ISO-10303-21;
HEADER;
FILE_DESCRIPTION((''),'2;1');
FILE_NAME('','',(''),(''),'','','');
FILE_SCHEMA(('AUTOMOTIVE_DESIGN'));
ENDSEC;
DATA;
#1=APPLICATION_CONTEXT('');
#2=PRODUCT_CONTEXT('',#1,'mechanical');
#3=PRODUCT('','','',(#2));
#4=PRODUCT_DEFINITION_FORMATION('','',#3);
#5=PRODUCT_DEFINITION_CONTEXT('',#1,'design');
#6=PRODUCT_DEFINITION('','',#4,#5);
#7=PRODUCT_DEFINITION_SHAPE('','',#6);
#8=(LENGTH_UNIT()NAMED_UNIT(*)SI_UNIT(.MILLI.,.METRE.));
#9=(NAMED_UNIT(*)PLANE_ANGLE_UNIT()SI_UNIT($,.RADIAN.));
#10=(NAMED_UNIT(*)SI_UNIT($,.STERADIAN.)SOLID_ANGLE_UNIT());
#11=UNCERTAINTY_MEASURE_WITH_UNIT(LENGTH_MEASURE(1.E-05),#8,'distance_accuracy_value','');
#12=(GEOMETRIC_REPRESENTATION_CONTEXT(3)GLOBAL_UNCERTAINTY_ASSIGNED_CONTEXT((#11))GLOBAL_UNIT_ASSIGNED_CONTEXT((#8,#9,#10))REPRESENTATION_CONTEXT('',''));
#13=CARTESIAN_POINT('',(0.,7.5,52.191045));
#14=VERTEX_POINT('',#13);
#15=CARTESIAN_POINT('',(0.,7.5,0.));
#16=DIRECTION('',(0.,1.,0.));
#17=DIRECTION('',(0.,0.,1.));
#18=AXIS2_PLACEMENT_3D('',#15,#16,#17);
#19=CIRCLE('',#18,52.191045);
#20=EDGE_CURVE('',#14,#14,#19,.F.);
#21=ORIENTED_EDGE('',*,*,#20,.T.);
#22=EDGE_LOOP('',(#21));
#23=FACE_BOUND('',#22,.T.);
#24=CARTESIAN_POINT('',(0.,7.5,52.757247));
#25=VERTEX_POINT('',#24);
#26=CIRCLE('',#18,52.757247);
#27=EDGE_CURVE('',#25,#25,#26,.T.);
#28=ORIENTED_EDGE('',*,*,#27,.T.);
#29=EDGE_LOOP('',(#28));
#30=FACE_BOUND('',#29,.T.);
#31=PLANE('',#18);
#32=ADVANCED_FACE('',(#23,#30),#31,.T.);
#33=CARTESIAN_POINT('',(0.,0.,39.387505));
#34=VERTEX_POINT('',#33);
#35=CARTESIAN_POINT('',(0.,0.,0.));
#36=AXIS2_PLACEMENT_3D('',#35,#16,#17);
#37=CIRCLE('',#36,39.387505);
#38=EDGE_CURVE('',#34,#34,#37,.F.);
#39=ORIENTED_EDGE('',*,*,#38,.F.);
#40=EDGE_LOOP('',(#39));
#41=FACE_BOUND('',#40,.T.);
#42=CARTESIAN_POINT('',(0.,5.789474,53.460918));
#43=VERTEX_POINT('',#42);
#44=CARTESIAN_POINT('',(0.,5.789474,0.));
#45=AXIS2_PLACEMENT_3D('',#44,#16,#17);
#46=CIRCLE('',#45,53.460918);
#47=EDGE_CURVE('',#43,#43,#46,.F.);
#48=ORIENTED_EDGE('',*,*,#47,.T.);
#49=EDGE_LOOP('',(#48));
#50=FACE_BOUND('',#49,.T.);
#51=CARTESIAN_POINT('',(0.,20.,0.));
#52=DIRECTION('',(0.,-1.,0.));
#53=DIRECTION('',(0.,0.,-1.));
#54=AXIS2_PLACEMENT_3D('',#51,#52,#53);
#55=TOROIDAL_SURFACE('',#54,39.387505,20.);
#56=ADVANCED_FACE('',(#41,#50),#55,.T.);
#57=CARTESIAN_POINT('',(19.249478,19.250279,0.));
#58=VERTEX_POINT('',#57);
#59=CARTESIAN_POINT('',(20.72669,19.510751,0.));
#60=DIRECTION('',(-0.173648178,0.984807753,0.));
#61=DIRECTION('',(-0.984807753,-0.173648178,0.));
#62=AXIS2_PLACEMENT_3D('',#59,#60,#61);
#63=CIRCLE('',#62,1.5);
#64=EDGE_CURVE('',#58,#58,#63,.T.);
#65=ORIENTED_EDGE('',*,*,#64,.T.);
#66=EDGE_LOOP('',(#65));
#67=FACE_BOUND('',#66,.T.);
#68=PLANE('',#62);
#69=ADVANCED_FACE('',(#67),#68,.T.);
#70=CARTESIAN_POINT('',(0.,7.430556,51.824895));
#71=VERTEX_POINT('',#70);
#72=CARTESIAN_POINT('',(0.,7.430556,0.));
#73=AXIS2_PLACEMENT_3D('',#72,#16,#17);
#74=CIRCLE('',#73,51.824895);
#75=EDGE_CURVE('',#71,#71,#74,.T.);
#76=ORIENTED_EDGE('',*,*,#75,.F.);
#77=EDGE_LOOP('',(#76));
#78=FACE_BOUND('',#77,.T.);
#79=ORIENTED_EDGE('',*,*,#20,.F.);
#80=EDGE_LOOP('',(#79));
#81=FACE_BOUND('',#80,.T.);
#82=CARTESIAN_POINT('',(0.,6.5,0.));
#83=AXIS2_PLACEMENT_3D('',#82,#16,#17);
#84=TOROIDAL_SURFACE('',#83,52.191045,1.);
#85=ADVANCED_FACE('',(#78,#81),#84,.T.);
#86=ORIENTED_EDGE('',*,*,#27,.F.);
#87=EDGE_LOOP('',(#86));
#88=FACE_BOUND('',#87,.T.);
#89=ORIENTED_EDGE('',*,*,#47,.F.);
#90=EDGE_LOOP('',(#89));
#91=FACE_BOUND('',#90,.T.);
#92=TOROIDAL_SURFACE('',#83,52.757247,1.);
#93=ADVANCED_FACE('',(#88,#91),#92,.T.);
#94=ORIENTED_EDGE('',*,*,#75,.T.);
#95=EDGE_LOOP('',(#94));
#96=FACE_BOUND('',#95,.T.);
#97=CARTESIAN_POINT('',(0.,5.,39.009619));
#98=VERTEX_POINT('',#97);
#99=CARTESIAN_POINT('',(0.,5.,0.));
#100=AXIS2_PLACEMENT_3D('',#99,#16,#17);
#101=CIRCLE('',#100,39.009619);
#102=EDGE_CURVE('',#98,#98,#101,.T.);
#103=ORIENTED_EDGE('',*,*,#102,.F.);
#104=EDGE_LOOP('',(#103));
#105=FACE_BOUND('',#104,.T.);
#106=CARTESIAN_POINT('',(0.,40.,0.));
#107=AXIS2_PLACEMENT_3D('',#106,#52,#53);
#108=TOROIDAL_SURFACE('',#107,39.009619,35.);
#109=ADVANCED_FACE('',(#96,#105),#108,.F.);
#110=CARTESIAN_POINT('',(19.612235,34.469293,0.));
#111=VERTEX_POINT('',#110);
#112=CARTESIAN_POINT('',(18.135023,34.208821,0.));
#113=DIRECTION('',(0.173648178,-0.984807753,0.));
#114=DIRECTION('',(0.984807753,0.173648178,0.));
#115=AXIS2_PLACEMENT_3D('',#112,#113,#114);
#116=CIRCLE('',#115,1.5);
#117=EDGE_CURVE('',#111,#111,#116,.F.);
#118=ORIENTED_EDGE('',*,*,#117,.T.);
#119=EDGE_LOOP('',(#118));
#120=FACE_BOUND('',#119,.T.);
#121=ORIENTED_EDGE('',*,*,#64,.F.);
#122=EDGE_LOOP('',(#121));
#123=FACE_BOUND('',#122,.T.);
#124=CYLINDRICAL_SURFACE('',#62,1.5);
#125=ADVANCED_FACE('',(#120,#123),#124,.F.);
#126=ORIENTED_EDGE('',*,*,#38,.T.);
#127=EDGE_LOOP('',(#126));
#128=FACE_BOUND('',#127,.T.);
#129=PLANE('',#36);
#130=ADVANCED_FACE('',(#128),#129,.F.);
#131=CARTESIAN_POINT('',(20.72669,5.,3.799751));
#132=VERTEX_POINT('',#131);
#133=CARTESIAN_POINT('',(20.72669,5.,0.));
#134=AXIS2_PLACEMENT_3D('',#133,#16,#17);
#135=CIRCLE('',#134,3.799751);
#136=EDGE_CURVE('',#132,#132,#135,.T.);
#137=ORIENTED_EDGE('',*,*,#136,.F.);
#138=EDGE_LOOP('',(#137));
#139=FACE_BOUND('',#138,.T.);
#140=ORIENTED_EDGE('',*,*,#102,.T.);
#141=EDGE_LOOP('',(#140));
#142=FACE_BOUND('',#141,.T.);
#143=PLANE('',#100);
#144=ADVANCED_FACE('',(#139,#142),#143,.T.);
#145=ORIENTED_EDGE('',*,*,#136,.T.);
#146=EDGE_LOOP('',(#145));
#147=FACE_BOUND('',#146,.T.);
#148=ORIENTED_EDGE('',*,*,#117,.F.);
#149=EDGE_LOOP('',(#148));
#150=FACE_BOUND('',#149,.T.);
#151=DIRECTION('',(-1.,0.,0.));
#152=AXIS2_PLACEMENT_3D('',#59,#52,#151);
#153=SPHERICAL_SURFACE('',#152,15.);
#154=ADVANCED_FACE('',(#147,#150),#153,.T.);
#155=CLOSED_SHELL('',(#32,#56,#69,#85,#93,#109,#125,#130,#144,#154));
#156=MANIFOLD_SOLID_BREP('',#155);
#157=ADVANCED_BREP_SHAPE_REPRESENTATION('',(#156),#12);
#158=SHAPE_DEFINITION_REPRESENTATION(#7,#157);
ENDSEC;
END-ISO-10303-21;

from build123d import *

# Parameters (mm, degrees)
SKETCH1_R           = 55
BOSS_EXTRUDE1_DEPTH = 7.5
SKETCH2_R           = 52
CUT_EXTRUDE1_DEPTH  = 2.5
FILLET1_R           = 35
FILLET3_R           = 20
FILLET4_R           = 1
SKETCH5_R           = 1.5
CUT_EXTRUDE2_DEPTH  = 15


with BuildPart() as part:
    # Sketch1 → Boss-Extrude1 (new body)
    with BuildSketch(Plane(origin=(0, 0, 0), x_dir=(1, 0, 0), z_dir=(0, 1, 0))):
        with Locations(Location((0, 0, 0), (0, 0, 270))):
            Circle(SKETCH1_R)
    extrude(amount=BOSS_EXTRUDE1_DEPTH)

    # Sketch2 → Cut-Extrude1 (cut)
    with BuildSketch(Plane(origin=(0, 7.5, 0), x_dir=(1, 0, 0), z_dir=(0, 1, 0))):
        with Locations(Location((0, 0, 0), (0, 0, 270))):
            Circle(SKETCH2_R)
    extrude(amount=-CUT_EXTRUDE1_DEPTH, mode=Mode.SUBTRACT)

    # Fillet1
    # the kernel refuses this fillet: 35 mm, written as the material it adds along each edge
    with BuildSketch(Plane(origin=(0, 5, 0), x_dir=(0, 0, 1), z_dir=(-1, 0, 0))) as fillet1_piece_1:
        with BuildLine():
            CenterArc((39.009618943, 35), FILLET1_R, 270, 21.786789298)
            Line((39.009618943, 0), (39.009618943, -0.7))
            Line((39.009618943, -0.7), (52, -0.7))
            Line((52, -0.7), (52.7, 0))
            ThreePointArc((52.7, 0), (52.7, 1.25), (52.259807621, 1.85))
            Line((52.259807621, 1.85), (52, 2.5))
        make_face()
    revolve(axis=Axis((0, 5, 0), (0, 1, 0)))

    # Fillet3
    # the kernel refuses this fillet: 20 mm, written as the material it takes off along each edge
    with BuildSketch(Plane(origin=(0, 0, 0), x_dir=(0, 0, 1), z_dir=(-1, 0, 0))) as fillet3_piece_1:
        with BuildLine():
            CenterArc((39.387505004, 20), FILLET3_R, 270, 51.317812547)
            Line((39.387505004, 0), (39.387505004, -0.4))
            Line((39.387505004, -0.4), (55, -0.4))
            Line((55, -0.4), (55.4, 0))
            ThreePointArc((55.4, 0), (55.4, 3.75), (55.3122499, 7.25))
            Line((55.3122499, 7.25), (55, 7.5))
        make_face()
    revolve(axis=Axis((0, 0, 0), (0, 1, 0)), mode=Mode.SUBTRACT)

    # Fillet4
    fillet4_edges = [part.edges().sort_by_distance(p)[0] for p in [
        (0, 7.5, -55),
        (0, 7.5, -52),
    ]]
    fillet(fillet4_edges, radius=FILLET4_R)

    # Sketch3 → Revolve1 (revolve)
    with BuildSketch(Plane.XY):
        with BuildLine():
            Line((20.726689781, 4.510750885), (20.726689781, 34.510750885))
            ThreePointArc((20.726689781, 34.510750885), (35.726689781, 19.510750885), (20.726689781, 4.510750885))
        make_face()
    revolve(axis=Axis((20.726689781, 4.510750885, 0), (0, 1, 0)))

    # Sketch5 → Cut-Extrude2 (cut)
    with BuildSketch(Plane(origin=(-5.316271402, 30.150073349, 0), x_dir=(0.9848077530122074, 0.17364817766693472, 0), z_dir=(-0.17364817766693474, 0.9848077530122075, 0))):
        with Locations(Location((23.799811127, 0, 0), (0, 0, 180))):
            Circle(SKETCH5_R)
    extrude(amount=-CUT_EXTRUDE2_DEPTH, mode=Mode.SUBTRACT)


solid = part.part
